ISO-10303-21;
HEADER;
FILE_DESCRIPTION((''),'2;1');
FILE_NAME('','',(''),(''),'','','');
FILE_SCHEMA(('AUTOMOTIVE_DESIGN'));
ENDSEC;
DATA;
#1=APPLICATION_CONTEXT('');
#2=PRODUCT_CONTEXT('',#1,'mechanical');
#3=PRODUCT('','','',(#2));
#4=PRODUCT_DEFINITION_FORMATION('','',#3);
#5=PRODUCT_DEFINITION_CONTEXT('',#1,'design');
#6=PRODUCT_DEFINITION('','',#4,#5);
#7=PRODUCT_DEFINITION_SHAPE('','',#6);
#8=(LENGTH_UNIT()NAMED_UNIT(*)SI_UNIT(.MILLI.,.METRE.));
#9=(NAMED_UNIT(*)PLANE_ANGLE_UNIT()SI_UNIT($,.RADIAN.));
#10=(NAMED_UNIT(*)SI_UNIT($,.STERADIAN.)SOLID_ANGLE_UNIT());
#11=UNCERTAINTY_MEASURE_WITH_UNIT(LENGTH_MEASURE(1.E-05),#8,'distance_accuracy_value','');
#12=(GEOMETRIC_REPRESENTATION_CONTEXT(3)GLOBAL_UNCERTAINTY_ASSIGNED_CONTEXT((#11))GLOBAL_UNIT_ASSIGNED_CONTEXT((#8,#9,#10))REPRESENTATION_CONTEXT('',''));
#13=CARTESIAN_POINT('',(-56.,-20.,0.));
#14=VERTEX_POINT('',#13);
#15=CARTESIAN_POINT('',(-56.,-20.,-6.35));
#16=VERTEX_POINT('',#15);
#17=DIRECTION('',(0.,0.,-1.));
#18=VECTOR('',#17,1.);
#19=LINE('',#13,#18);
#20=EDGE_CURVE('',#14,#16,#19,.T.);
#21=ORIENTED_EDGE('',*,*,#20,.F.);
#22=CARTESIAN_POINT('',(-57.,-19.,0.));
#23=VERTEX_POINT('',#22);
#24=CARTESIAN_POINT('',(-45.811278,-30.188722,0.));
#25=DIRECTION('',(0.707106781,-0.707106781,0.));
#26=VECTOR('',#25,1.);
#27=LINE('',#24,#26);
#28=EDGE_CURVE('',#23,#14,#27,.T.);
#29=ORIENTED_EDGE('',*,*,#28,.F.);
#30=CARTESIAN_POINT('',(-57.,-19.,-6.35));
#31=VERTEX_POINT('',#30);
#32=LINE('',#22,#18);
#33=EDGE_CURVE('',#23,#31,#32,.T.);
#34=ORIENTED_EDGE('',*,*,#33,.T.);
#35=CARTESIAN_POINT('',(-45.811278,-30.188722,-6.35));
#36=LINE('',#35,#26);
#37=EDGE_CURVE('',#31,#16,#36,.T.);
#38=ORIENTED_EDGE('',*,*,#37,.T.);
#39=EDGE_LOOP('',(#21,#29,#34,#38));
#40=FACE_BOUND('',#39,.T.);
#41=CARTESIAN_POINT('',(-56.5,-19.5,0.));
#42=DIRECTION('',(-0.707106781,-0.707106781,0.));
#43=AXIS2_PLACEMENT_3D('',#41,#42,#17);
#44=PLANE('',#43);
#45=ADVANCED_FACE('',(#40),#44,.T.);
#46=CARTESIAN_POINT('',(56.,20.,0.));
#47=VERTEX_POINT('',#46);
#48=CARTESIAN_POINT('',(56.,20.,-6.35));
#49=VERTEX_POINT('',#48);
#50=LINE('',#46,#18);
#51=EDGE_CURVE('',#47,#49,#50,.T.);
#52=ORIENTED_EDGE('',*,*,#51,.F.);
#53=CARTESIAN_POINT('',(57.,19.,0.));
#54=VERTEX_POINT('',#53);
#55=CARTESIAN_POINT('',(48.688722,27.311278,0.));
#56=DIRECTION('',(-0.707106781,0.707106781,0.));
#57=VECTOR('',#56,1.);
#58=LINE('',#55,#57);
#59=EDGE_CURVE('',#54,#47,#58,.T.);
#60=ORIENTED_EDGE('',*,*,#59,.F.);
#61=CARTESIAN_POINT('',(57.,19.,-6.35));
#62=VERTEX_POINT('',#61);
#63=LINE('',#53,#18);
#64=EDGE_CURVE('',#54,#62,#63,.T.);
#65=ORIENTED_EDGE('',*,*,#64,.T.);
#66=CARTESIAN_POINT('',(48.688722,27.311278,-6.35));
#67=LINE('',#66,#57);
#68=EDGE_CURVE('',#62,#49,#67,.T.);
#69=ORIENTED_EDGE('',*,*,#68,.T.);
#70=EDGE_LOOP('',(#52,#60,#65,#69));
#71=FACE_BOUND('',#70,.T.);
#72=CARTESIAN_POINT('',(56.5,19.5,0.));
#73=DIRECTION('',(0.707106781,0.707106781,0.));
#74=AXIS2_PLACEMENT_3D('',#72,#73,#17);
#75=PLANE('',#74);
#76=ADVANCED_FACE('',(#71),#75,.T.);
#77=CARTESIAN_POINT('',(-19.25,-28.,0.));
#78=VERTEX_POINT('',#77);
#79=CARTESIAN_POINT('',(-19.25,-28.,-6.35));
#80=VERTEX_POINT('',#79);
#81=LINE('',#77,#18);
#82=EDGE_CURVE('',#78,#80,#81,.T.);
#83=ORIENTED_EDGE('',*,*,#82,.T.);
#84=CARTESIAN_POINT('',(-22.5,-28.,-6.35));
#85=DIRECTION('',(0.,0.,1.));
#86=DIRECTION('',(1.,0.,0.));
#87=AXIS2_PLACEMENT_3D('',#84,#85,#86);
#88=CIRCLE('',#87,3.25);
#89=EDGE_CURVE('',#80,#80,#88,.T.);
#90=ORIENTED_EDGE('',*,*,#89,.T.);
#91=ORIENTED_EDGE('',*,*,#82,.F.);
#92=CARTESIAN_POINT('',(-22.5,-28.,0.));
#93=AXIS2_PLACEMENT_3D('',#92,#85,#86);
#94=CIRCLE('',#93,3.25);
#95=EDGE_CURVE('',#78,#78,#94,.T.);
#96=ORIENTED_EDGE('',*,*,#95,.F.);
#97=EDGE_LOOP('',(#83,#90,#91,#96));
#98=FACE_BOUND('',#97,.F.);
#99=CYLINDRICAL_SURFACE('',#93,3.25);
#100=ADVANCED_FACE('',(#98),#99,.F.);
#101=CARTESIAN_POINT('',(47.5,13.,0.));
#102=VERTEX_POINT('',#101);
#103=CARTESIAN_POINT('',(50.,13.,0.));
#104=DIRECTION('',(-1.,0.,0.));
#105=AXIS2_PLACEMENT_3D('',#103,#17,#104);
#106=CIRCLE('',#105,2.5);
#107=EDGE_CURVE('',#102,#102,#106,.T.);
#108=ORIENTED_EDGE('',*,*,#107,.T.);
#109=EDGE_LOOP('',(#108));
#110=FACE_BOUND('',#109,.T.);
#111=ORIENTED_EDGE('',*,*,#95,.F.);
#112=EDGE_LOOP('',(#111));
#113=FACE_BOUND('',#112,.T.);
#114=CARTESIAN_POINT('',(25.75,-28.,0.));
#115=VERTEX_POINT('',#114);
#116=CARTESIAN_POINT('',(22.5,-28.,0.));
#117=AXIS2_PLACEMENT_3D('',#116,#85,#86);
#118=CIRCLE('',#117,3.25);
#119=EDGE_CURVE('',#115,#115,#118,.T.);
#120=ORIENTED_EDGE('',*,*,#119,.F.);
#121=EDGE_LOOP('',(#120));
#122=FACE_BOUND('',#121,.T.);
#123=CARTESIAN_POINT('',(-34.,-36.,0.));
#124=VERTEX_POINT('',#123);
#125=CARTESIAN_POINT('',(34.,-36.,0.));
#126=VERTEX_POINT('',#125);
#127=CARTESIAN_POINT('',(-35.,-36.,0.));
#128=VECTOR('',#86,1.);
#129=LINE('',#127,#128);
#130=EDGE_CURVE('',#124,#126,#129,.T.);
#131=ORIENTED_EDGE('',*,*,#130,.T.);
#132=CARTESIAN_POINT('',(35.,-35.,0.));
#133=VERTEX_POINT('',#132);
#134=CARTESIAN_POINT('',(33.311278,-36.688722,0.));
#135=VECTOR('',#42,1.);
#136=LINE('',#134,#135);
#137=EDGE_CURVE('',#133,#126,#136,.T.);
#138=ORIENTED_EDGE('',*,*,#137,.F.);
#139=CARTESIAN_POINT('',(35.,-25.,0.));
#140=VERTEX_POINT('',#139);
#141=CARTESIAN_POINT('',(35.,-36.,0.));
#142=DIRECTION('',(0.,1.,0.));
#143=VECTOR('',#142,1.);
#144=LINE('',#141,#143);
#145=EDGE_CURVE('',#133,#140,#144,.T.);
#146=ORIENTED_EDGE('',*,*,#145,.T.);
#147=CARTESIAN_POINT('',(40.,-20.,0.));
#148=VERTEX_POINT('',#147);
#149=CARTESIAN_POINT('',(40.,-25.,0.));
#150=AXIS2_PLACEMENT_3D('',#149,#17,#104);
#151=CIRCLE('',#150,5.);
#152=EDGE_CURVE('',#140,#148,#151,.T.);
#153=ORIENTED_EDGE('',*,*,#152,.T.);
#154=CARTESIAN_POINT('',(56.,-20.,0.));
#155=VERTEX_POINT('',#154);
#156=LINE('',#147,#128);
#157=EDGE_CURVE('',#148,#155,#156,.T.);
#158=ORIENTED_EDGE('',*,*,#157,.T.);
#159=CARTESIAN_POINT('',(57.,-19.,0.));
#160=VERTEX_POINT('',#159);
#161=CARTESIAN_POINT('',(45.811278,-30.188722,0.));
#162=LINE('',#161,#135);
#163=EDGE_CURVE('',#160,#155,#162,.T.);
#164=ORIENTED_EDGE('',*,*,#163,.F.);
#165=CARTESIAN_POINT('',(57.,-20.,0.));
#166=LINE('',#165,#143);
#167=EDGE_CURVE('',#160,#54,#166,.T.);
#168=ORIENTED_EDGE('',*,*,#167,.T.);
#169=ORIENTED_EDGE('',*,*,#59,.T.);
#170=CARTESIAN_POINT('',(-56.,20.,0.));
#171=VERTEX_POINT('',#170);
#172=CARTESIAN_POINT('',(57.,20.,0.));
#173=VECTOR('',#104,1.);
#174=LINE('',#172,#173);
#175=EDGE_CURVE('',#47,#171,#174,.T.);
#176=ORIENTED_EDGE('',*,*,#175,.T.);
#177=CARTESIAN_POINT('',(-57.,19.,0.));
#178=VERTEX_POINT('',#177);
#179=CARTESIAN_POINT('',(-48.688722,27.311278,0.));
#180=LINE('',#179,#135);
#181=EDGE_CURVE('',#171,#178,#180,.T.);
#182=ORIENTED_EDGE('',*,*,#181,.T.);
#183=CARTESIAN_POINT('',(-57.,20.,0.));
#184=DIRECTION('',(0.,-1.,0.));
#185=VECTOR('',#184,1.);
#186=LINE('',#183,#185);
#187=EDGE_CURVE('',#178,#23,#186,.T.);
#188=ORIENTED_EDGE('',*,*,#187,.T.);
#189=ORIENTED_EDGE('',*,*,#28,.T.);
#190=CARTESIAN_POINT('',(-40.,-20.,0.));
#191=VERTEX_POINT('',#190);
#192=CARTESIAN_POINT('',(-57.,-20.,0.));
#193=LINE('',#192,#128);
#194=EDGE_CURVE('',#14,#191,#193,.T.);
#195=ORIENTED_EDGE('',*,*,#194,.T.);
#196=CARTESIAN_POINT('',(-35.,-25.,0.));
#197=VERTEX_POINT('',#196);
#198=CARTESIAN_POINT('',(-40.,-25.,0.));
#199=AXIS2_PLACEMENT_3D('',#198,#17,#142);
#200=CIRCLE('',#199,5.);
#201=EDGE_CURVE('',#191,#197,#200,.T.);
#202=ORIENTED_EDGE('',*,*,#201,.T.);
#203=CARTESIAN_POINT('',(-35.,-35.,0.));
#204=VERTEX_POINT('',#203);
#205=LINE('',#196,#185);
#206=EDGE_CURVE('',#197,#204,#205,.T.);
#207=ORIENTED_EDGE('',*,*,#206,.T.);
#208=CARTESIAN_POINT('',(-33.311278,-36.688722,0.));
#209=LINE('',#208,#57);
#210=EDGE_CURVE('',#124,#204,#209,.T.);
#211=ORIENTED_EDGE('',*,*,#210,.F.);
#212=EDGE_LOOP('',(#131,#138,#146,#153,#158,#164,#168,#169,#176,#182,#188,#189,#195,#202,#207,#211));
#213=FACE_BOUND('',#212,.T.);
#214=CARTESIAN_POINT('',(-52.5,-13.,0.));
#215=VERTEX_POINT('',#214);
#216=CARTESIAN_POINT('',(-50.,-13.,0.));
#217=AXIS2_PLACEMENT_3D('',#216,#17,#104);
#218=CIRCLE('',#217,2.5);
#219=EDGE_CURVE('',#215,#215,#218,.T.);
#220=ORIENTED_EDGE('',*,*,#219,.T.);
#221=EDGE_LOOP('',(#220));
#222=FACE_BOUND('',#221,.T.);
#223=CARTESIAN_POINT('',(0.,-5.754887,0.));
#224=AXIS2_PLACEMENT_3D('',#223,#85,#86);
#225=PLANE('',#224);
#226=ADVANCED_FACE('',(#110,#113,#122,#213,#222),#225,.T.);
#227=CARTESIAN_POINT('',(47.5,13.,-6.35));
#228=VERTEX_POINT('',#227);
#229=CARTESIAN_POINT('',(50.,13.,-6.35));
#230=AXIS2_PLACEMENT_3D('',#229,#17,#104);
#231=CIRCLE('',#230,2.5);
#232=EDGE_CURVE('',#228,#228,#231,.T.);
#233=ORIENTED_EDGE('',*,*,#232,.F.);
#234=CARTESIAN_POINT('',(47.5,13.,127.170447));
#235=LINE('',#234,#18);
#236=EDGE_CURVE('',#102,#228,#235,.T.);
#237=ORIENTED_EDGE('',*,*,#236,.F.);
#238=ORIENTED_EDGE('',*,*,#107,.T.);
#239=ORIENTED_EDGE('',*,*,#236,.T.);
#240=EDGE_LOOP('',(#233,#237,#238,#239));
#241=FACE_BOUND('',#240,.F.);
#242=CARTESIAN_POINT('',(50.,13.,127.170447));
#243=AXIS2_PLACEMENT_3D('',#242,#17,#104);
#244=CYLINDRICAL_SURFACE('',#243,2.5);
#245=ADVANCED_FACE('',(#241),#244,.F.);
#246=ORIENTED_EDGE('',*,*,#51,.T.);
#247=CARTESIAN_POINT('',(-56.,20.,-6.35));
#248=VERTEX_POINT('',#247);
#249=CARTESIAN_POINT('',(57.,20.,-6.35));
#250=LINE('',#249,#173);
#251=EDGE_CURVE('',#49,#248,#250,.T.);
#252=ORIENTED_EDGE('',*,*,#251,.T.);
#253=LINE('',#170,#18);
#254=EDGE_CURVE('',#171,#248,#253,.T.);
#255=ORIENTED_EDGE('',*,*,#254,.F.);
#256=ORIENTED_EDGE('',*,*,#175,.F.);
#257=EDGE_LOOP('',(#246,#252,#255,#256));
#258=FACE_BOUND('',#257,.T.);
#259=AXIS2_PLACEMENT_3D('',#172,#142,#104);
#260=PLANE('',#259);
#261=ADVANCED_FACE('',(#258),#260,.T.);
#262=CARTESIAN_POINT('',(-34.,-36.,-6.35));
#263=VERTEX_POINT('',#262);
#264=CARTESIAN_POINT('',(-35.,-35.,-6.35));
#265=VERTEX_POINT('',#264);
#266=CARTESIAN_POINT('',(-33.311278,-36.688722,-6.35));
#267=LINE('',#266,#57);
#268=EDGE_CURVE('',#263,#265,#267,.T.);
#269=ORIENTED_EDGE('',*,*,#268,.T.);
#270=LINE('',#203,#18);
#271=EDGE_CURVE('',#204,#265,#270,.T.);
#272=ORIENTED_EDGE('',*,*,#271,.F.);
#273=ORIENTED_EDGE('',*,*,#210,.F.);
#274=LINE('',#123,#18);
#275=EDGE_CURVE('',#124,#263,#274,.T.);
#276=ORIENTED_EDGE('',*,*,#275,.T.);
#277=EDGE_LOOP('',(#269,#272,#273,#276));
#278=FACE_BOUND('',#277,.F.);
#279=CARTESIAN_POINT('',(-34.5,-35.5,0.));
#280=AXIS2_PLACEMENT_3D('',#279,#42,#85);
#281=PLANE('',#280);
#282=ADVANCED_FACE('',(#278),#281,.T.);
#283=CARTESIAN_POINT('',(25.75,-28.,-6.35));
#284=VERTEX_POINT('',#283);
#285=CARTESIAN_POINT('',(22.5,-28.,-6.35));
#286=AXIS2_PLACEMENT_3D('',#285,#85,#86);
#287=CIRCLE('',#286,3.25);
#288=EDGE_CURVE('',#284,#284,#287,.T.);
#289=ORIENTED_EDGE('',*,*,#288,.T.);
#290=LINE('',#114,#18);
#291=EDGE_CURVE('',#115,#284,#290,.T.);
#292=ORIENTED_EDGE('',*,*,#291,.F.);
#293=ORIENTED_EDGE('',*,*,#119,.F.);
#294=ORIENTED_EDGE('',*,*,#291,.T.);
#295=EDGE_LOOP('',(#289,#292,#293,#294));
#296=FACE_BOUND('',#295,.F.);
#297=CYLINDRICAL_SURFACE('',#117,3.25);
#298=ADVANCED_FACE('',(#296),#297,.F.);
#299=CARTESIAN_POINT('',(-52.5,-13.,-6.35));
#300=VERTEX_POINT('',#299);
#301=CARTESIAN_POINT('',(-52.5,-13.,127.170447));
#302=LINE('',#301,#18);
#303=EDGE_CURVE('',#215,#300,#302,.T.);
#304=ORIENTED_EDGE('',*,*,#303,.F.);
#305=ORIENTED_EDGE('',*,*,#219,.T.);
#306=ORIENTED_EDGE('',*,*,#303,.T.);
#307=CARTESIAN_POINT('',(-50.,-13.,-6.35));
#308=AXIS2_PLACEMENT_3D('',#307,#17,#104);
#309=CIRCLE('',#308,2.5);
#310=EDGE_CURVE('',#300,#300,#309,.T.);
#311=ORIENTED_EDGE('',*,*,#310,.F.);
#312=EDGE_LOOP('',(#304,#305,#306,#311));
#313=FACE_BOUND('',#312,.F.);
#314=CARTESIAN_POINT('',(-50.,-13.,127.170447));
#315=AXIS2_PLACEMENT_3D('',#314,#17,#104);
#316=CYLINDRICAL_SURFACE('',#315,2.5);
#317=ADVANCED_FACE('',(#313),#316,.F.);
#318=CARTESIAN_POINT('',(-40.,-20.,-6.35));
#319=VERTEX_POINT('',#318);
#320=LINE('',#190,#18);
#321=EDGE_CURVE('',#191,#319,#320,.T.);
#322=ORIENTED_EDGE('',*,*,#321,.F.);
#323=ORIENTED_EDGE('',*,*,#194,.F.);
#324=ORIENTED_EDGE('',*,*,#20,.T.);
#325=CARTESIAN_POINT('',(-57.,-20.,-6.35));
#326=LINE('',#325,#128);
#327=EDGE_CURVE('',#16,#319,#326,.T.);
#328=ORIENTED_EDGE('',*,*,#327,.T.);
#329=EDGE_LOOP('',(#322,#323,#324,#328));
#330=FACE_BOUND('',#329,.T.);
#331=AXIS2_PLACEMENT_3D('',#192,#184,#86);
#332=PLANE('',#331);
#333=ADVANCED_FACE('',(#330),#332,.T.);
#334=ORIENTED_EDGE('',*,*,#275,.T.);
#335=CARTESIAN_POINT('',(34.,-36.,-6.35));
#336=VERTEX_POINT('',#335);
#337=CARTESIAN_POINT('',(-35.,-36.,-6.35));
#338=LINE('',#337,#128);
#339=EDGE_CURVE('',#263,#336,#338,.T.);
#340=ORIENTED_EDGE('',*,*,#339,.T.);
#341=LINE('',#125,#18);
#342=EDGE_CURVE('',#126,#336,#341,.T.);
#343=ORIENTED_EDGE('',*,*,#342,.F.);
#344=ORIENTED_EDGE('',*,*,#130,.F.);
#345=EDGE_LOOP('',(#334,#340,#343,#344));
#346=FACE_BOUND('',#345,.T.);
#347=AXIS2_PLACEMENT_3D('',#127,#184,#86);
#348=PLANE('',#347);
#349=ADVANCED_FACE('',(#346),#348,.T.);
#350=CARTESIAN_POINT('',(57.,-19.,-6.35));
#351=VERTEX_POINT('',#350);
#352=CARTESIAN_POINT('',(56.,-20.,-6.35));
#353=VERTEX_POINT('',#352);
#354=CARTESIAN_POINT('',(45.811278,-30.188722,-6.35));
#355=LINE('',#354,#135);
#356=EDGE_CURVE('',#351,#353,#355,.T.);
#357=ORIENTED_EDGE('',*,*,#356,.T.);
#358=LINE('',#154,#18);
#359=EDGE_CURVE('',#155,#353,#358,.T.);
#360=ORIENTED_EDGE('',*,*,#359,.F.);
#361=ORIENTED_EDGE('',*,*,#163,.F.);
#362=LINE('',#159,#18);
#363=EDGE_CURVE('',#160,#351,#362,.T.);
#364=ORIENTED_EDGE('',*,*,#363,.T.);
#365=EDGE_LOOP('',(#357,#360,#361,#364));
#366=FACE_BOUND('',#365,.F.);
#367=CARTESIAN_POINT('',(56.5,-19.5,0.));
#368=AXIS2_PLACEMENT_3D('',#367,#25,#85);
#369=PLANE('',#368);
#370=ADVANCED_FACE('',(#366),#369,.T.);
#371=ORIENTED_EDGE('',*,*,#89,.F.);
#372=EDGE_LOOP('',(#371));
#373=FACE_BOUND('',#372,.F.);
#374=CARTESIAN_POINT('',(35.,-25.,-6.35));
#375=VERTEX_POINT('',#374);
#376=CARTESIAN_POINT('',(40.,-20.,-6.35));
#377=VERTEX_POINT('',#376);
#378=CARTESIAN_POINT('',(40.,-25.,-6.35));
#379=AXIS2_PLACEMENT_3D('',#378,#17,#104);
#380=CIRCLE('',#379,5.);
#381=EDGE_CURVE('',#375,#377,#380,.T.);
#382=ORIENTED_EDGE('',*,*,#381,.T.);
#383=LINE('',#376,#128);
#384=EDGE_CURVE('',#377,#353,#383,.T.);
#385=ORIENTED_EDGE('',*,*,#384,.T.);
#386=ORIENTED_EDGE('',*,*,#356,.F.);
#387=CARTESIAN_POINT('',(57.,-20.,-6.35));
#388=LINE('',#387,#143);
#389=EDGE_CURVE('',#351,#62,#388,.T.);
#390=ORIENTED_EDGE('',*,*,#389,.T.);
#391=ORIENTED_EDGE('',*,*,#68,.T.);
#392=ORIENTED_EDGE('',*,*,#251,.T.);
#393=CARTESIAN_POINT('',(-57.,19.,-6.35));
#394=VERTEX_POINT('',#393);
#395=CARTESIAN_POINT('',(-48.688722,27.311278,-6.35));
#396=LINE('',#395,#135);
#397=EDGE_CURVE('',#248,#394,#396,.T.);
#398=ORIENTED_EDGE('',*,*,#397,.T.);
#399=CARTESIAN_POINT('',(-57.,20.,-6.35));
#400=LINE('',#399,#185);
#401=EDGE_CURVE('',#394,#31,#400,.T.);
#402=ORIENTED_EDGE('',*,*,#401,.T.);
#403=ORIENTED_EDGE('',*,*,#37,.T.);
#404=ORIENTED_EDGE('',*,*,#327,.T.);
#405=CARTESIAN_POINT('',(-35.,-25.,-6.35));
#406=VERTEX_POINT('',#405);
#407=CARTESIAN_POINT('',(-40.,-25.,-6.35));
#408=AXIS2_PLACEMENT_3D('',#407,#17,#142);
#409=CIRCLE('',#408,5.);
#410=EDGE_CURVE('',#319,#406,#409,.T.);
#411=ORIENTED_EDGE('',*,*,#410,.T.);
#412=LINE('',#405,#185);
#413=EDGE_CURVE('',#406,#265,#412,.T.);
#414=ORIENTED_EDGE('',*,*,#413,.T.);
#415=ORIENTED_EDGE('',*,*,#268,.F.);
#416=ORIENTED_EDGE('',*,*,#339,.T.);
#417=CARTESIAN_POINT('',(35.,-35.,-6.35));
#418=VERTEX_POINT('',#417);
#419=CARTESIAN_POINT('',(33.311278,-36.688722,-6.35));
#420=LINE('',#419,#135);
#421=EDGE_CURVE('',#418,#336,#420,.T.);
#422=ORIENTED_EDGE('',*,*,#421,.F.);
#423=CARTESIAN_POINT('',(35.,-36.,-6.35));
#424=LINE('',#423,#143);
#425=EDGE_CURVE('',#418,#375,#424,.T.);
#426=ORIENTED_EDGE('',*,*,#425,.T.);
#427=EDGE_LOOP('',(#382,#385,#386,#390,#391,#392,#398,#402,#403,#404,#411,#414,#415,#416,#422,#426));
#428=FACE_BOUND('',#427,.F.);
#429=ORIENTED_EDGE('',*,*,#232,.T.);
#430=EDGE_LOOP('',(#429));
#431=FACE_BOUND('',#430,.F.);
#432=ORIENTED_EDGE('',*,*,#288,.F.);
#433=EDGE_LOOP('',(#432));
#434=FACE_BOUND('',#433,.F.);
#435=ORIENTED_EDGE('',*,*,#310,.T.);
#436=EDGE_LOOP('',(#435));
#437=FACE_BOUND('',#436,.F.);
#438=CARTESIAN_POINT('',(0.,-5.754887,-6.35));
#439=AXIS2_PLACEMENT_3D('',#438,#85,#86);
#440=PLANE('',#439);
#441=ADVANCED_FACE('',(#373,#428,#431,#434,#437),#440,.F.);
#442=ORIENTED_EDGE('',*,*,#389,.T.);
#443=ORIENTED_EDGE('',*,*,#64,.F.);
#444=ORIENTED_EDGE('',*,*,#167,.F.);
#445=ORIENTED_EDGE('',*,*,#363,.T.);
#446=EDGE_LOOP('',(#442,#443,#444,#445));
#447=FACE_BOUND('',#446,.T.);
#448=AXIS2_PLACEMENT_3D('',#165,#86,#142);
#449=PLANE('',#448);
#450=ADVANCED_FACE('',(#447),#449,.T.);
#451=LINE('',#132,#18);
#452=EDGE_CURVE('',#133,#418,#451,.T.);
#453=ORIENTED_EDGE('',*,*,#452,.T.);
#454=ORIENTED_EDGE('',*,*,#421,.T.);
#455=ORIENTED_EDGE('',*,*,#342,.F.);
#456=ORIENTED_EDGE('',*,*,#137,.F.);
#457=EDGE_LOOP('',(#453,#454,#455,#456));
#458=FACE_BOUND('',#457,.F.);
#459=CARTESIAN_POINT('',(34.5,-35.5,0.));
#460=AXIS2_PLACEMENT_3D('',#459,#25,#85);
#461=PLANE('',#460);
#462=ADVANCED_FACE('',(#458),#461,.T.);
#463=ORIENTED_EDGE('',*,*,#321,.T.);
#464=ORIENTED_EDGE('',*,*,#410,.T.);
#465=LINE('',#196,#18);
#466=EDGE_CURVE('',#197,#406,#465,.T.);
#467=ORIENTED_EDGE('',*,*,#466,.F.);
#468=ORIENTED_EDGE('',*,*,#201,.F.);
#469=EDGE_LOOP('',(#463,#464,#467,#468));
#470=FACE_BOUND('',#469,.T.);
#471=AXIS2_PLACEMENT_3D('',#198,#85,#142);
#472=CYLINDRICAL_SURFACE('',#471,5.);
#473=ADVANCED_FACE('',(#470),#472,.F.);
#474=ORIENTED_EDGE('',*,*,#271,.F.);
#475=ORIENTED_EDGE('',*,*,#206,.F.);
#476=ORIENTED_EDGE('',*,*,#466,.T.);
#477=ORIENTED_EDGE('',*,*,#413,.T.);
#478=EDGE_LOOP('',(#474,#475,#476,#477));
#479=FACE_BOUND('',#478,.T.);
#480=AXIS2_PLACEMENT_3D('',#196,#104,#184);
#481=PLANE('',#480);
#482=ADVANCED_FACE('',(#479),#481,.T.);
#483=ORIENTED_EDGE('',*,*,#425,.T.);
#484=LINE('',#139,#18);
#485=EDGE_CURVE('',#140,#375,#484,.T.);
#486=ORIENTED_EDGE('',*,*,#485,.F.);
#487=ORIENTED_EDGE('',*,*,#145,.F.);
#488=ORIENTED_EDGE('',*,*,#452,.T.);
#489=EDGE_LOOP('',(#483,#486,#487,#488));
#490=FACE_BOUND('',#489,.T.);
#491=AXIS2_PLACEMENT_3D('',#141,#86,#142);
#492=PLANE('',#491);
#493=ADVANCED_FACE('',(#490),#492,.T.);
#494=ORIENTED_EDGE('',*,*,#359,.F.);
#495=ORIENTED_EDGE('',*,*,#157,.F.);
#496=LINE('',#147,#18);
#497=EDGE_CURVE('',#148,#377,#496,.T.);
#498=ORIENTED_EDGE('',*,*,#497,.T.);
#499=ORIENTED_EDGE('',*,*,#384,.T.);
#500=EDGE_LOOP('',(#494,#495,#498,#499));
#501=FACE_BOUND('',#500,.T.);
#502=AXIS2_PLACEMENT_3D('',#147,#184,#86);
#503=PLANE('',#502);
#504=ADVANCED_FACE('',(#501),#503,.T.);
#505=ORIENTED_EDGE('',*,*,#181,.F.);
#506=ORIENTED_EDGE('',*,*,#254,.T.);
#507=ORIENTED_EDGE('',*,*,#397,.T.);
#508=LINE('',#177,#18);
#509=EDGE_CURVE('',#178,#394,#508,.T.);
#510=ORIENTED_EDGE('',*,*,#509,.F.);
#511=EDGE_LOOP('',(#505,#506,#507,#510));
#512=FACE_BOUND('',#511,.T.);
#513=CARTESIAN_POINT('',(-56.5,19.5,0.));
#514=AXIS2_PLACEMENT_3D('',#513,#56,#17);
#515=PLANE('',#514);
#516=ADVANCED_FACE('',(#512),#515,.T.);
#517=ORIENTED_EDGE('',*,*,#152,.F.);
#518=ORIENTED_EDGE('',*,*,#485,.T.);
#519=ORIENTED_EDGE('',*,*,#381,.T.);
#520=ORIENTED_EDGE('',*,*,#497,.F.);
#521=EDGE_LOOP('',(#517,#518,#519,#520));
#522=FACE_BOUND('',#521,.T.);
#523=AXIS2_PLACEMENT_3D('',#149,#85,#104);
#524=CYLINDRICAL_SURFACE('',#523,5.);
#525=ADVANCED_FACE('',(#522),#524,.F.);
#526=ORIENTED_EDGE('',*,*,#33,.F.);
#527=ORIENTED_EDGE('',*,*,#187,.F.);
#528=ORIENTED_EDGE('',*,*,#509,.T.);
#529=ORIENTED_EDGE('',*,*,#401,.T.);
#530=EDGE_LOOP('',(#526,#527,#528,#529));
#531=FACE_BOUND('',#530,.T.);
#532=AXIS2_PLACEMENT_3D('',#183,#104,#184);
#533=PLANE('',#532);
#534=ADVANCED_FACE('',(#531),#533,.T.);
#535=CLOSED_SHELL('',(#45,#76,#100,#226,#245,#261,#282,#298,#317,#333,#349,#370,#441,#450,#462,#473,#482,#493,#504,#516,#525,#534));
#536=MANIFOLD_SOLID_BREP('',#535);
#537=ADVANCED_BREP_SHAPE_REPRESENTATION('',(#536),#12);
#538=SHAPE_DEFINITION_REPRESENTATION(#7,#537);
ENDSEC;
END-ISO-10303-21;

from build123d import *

# Parameters (mm, degrees)
F0_R     = 3.25
F1_DEPTH = 6.35
F2_SIZE  = 1
F3_D     = 5


with BuildPart() as f1:
    # F0 (on Top) → F1 (new body)
    with BuildSketch(Plane.XY):
        with BuildLine():
            Line((57, -20), (57, 20))
            Line((57, 20), (-57, 20))
            Line((-57, 20), (-57, -20))
            Line((-57, -20), (-40, -20))
            ThreePointArc((-40, -20), (-36.4644660941, -21.4644660941), (-35, -25))
            Line((-35, -25), (-35, -36))
            Line((-35, -36), (35, -36))
            Line((35, -36), (35, -25))
            ThreePointArc((35, -25), (36.4644660941, -21.4644660941), (40, -20))
            Line((40, -20), (57, -20))
        make_face()
        with Locations((-22.5, -28)):
            Circle(F0_R, mode=Mode.SUBTRACT)
        with Locations((22.5, -28)):
            Circle(F0_R, mode=Mode.SUBTRACT)
    extrude(amount=-F1_DEPTH)

    # F2
    f2_edges = [f1.edges().sort_by_distance(p)[0] for p in [
        (-35, -36, -3.175),
        (-57, -20, -3.175),
        (35, -36, -3.175),
        (57, -20, -3.175),
        (-57, 20, -3.175),
        (57, 20, -3.175),
    ]]
    chamfer(f2_edges, length=F2_SIZE)

    # F3 (through all)
    with Locations(Plane.XY):
        with Locations((-50, -13), (50, 13)):
            Hole(F3_D / 2)


solid = f1.part
